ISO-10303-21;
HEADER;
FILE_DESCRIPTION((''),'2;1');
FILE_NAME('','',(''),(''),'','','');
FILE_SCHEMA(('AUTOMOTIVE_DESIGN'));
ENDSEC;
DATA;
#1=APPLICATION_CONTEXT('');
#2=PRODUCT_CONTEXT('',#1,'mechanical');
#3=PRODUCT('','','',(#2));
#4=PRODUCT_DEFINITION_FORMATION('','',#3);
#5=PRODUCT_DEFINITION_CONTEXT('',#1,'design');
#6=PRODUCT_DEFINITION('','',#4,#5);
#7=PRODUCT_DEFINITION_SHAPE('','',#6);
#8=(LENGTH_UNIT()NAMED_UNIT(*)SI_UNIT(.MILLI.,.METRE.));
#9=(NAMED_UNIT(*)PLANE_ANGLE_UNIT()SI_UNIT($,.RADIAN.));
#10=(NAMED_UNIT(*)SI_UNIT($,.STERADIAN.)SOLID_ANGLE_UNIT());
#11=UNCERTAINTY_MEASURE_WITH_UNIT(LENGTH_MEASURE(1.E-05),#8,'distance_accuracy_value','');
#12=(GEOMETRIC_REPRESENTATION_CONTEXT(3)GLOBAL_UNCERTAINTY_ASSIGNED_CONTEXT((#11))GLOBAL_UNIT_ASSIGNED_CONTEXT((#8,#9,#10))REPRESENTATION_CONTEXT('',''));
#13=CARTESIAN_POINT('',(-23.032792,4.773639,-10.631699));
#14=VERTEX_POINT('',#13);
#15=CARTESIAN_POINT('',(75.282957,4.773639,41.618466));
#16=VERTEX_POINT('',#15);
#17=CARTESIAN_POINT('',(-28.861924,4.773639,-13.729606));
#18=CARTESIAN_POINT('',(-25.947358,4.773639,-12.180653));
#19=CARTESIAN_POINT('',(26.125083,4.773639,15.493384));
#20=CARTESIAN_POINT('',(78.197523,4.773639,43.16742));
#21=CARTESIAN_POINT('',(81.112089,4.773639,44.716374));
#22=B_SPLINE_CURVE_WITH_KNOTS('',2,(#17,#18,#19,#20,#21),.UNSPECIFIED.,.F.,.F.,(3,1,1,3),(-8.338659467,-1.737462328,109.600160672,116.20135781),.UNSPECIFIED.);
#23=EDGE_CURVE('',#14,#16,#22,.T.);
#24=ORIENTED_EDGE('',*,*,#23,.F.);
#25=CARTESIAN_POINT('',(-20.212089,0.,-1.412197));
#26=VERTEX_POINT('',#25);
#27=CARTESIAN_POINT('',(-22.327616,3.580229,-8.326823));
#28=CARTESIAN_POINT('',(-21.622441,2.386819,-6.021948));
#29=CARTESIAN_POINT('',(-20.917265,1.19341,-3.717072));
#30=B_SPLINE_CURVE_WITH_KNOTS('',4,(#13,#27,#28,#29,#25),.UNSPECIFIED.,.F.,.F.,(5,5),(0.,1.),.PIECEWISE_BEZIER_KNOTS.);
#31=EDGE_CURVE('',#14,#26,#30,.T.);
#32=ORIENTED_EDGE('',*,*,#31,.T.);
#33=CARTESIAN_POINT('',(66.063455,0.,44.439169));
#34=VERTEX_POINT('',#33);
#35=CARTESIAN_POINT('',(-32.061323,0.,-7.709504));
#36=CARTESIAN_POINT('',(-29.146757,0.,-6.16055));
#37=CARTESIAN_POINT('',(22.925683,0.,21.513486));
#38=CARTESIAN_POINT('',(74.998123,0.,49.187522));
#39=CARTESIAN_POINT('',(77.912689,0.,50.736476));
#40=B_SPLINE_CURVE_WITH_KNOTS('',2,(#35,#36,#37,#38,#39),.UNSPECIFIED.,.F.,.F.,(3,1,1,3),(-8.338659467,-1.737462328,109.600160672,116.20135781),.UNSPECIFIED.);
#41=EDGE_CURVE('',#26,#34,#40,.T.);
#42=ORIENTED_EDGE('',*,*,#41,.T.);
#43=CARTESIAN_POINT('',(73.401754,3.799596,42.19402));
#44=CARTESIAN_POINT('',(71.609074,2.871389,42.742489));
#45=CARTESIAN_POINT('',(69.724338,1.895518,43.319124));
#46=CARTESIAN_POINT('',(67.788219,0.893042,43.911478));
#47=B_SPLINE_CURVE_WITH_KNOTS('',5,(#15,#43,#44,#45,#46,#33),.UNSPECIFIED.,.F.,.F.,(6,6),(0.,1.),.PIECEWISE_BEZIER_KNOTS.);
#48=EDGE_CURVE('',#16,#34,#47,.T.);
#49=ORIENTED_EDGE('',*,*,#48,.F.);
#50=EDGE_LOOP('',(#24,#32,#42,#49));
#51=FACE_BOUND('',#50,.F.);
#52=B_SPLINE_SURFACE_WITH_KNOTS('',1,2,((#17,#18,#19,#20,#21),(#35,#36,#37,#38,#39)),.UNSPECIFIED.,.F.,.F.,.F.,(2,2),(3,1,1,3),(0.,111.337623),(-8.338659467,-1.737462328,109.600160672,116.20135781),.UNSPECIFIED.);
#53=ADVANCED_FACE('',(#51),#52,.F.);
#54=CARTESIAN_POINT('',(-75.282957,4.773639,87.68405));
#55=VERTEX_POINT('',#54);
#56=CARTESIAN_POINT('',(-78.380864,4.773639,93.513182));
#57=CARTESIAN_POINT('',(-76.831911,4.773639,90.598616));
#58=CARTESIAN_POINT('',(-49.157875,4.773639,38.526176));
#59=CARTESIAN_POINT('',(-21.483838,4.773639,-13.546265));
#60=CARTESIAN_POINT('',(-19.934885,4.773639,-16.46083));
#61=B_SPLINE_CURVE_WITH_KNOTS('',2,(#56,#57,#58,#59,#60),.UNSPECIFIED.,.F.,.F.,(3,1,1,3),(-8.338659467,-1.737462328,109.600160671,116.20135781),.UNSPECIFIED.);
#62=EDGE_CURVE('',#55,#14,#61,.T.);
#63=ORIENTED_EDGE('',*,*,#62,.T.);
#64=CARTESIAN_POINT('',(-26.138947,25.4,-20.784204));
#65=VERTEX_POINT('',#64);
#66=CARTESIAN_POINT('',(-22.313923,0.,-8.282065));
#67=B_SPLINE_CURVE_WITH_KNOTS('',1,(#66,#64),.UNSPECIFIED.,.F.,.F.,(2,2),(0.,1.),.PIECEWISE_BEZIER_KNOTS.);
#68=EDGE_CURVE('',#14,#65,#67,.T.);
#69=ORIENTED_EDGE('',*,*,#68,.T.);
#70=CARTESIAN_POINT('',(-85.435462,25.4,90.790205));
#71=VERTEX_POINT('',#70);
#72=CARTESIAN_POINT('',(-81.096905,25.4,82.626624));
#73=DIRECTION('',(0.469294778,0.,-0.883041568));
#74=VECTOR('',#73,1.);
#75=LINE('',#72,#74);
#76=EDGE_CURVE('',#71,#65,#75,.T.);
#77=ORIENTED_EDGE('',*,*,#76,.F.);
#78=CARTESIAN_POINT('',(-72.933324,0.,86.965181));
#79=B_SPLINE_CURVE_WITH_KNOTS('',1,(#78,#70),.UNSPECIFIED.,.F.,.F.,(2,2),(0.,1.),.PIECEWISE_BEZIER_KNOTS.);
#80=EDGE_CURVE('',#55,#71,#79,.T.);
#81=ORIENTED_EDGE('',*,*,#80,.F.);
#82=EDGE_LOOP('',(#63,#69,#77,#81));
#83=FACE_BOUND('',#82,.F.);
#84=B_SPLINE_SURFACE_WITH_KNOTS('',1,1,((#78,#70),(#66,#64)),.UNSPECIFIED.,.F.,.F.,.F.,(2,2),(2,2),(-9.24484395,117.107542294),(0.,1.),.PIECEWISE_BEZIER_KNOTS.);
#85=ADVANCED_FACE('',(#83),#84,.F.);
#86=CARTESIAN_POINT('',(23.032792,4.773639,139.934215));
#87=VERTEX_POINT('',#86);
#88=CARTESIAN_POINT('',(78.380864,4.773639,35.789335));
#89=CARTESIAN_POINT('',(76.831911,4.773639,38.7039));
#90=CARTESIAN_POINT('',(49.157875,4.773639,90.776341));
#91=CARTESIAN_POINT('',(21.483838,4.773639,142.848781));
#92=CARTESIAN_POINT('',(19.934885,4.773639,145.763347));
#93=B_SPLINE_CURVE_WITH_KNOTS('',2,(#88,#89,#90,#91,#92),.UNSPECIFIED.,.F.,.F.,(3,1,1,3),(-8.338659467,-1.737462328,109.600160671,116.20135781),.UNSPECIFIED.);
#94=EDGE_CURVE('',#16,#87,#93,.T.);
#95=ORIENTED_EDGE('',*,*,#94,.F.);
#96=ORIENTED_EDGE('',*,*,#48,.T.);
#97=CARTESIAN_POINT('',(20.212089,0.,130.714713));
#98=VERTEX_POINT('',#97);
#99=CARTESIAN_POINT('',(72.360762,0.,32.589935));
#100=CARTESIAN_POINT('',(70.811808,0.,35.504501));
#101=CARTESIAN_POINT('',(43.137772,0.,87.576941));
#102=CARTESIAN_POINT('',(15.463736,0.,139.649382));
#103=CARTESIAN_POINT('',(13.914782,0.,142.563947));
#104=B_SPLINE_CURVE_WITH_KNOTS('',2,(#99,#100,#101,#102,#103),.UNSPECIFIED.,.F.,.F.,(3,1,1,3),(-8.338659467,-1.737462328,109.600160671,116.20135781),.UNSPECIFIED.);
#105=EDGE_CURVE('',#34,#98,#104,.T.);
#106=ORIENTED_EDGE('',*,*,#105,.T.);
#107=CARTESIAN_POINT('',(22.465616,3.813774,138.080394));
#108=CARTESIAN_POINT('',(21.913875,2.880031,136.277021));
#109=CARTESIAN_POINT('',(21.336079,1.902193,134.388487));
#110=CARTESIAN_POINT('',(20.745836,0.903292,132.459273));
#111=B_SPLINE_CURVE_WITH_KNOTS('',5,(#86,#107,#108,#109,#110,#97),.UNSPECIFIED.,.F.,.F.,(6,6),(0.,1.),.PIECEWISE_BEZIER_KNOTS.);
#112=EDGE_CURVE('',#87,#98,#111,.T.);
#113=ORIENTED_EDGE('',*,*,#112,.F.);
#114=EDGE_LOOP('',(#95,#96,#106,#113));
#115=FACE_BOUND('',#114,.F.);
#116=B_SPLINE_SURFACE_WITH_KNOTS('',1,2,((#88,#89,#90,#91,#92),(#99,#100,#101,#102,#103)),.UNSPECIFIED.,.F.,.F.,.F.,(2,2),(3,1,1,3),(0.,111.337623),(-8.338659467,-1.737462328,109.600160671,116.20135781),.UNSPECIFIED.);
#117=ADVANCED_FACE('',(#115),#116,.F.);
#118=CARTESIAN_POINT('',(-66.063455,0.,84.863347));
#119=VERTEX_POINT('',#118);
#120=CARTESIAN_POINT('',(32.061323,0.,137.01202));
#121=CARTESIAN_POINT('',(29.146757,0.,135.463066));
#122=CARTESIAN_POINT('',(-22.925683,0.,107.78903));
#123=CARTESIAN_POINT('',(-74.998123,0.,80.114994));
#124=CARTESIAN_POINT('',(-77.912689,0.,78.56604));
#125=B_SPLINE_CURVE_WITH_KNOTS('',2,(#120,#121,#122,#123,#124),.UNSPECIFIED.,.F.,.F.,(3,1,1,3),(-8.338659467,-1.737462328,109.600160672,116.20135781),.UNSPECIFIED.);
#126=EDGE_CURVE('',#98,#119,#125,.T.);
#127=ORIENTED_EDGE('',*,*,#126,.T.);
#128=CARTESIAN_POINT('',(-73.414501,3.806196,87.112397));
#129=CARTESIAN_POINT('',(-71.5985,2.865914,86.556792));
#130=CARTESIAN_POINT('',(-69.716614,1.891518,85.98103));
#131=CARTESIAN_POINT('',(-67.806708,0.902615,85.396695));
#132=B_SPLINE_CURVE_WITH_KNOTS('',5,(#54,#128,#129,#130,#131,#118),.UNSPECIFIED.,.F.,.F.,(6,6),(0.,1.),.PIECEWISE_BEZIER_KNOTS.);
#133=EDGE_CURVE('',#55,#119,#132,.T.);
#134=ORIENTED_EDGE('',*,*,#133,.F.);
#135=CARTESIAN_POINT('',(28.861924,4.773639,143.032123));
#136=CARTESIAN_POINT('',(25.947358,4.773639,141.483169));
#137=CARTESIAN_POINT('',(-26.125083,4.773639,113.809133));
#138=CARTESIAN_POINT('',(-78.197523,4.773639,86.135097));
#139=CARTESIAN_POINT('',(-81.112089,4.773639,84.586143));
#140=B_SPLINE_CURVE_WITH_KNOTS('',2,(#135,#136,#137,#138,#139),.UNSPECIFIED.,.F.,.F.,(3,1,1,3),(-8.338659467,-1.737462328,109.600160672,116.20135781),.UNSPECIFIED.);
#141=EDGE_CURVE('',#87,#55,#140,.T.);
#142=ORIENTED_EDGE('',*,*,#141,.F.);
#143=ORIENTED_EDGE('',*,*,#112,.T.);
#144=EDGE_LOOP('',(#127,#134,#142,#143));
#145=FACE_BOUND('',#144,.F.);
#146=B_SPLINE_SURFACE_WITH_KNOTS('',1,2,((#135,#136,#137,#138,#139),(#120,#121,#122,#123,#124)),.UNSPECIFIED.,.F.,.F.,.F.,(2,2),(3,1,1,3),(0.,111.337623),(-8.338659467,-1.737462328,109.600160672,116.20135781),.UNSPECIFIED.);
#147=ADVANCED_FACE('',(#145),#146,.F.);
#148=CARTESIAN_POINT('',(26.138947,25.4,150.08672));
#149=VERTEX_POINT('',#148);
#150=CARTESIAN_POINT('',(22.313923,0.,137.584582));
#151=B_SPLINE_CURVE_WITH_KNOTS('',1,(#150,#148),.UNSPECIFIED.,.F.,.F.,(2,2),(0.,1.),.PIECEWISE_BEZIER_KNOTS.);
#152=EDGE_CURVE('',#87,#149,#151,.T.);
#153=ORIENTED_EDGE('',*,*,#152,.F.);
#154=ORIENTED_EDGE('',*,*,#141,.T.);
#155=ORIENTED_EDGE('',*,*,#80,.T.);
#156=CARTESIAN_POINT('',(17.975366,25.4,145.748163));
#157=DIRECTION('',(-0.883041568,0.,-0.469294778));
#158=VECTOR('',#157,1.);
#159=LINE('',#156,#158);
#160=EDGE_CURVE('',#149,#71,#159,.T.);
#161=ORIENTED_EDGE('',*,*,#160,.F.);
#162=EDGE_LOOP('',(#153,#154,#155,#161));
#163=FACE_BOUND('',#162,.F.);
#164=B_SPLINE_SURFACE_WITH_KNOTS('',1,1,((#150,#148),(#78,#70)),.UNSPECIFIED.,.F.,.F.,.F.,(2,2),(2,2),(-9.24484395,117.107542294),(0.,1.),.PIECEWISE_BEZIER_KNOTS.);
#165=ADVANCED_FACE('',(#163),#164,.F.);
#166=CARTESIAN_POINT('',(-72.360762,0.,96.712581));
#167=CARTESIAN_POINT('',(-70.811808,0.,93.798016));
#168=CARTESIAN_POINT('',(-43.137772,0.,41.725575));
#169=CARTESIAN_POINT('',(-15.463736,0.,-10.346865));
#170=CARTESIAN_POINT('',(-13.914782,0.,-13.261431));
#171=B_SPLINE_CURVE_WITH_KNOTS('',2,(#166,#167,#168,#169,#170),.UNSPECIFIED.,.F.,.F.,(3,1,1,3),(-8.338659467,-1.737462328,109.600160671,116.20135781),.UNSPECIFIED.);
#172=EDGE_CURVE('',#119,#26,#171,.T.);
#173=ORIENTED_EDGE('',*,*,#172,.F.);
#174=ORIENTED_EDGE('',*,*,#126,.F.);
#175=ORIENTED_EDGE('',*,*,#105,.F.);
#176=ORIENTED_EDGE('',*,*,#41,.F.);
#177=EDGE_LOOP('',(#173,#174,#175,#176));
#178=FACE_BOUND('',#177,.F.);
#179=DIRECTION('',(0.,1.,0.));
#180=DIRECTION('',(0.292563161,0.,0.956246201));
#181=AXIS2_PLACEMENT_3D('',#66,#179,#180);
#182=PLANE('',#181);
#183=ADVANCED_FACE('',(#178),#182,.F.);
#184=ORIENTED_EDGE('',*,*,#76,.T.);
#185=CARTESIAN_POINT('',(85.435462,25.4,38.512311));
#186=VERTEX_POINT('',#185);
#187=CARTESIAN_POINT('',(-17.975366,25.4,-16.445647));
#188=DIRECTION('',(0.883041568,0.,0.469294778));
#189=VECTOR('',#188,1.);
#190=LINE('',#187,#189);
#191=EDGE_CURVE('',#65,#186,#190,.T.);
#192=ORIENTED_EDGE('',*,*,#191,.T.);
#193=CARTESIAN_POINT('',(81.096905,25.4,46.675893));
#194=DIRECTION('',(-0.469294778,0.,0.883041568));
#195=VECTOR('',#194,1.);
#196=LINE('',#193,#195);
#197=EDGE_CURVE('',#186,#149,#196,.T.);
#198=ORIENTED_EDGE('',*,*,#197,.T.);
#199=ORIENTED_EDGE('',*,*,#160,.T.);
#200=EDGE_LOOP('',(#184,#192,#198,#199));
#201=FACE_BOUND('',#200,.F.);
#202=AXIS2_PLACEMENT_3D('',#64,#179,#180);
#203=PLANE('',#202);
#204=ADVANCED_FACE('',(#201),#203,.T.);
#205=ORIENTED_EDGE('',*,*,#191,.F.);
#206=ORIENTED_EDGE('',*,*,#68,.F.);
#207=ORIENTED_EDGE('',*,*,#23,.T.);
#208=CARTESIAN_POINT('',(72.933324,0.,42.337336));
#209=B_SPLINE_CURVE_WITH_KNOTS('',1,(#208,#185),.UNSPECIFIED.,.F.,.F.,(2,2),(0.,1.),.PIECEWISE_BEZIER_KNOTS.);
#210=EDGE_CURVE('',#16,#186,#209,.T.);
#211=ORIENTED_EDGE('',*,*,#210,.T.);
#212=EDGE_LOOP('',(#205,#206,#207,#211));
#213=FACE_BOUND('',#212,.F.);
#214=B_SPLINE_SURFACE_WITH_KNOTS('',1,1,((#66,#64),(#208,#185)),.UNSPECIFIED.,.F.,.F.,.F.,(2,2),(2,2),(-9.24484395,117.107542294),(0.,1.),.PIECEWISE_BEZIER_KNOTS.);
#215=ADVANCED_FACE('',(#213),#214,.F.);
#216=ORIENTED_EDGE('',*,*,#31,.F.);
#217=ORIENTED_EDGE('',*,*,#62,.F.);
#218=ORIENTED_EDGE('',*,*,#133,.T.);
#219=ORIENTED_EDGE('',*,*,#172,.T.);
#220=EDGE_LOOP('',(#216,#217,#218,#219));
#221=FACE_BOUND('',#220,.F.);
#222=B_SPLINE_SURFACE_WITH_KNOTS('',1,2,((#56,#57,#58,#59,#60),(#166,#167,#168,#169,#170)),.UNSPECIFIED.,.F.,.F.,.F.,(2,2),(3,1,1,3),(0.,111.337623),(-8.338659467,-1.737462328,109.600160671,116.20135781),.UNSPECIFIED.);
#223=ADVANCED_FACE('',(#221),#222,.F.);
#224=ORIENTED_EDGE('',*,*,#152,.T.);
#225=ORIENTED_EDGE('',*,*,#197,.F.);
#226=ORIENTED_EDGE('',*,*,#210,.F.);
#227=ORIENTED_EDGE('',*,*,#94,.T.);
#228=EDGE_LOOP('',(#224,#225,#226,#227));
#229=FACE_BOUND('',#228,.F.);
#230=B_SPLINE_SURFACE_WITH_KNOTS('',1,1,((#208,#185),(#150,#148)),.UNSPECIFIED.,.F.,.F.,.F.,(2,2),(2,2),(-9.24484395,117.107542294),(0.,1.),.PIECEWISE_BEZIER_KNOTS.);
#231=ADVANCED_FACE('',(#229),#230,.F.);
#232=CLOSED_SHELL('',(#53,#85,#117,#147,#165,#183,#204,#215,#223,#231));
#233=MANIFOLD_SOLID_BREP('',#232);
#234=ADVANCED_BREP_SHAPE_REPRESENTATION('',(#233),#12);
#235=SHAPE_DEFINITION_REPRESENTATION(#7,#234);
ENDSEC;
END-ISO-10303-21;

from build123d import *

# Parameters (mm, degrees)
F1_DEPTH = 25.4
F1_TAPER = -20
F2_SIZE  = 5.08


# Not quite as in the source:
# - a feature names something its author has since deleted; it is built from what else it names


with BuildPart() as f1:
    # F0 (on Front) → F1 (new body)
    with BuildSketch(Plane.XZ):
        Polygon((-22.3139226437, -8.2820653915), (72.9333236814, 42.3373356462), (22.3139226437, 137.5845819712), (-72.9333236814, 86.9651809335), align=None)
    extrude(amount=-F1_DEPTH, taper=F1_TAPER)

    # F2
    f2_edges = [f1.edges().sort_by_distance(p)[0] for p in [
        (25.309701, 0, 17.027635),
        (47.623623, 0, 89.960959),
        (-25.309701, 0, 112.274881),
        (-47.623623, 0, 39.341558),
    ]]
    chamfer(f2_edges, length=F2_SIZE)


solid = f1.part
